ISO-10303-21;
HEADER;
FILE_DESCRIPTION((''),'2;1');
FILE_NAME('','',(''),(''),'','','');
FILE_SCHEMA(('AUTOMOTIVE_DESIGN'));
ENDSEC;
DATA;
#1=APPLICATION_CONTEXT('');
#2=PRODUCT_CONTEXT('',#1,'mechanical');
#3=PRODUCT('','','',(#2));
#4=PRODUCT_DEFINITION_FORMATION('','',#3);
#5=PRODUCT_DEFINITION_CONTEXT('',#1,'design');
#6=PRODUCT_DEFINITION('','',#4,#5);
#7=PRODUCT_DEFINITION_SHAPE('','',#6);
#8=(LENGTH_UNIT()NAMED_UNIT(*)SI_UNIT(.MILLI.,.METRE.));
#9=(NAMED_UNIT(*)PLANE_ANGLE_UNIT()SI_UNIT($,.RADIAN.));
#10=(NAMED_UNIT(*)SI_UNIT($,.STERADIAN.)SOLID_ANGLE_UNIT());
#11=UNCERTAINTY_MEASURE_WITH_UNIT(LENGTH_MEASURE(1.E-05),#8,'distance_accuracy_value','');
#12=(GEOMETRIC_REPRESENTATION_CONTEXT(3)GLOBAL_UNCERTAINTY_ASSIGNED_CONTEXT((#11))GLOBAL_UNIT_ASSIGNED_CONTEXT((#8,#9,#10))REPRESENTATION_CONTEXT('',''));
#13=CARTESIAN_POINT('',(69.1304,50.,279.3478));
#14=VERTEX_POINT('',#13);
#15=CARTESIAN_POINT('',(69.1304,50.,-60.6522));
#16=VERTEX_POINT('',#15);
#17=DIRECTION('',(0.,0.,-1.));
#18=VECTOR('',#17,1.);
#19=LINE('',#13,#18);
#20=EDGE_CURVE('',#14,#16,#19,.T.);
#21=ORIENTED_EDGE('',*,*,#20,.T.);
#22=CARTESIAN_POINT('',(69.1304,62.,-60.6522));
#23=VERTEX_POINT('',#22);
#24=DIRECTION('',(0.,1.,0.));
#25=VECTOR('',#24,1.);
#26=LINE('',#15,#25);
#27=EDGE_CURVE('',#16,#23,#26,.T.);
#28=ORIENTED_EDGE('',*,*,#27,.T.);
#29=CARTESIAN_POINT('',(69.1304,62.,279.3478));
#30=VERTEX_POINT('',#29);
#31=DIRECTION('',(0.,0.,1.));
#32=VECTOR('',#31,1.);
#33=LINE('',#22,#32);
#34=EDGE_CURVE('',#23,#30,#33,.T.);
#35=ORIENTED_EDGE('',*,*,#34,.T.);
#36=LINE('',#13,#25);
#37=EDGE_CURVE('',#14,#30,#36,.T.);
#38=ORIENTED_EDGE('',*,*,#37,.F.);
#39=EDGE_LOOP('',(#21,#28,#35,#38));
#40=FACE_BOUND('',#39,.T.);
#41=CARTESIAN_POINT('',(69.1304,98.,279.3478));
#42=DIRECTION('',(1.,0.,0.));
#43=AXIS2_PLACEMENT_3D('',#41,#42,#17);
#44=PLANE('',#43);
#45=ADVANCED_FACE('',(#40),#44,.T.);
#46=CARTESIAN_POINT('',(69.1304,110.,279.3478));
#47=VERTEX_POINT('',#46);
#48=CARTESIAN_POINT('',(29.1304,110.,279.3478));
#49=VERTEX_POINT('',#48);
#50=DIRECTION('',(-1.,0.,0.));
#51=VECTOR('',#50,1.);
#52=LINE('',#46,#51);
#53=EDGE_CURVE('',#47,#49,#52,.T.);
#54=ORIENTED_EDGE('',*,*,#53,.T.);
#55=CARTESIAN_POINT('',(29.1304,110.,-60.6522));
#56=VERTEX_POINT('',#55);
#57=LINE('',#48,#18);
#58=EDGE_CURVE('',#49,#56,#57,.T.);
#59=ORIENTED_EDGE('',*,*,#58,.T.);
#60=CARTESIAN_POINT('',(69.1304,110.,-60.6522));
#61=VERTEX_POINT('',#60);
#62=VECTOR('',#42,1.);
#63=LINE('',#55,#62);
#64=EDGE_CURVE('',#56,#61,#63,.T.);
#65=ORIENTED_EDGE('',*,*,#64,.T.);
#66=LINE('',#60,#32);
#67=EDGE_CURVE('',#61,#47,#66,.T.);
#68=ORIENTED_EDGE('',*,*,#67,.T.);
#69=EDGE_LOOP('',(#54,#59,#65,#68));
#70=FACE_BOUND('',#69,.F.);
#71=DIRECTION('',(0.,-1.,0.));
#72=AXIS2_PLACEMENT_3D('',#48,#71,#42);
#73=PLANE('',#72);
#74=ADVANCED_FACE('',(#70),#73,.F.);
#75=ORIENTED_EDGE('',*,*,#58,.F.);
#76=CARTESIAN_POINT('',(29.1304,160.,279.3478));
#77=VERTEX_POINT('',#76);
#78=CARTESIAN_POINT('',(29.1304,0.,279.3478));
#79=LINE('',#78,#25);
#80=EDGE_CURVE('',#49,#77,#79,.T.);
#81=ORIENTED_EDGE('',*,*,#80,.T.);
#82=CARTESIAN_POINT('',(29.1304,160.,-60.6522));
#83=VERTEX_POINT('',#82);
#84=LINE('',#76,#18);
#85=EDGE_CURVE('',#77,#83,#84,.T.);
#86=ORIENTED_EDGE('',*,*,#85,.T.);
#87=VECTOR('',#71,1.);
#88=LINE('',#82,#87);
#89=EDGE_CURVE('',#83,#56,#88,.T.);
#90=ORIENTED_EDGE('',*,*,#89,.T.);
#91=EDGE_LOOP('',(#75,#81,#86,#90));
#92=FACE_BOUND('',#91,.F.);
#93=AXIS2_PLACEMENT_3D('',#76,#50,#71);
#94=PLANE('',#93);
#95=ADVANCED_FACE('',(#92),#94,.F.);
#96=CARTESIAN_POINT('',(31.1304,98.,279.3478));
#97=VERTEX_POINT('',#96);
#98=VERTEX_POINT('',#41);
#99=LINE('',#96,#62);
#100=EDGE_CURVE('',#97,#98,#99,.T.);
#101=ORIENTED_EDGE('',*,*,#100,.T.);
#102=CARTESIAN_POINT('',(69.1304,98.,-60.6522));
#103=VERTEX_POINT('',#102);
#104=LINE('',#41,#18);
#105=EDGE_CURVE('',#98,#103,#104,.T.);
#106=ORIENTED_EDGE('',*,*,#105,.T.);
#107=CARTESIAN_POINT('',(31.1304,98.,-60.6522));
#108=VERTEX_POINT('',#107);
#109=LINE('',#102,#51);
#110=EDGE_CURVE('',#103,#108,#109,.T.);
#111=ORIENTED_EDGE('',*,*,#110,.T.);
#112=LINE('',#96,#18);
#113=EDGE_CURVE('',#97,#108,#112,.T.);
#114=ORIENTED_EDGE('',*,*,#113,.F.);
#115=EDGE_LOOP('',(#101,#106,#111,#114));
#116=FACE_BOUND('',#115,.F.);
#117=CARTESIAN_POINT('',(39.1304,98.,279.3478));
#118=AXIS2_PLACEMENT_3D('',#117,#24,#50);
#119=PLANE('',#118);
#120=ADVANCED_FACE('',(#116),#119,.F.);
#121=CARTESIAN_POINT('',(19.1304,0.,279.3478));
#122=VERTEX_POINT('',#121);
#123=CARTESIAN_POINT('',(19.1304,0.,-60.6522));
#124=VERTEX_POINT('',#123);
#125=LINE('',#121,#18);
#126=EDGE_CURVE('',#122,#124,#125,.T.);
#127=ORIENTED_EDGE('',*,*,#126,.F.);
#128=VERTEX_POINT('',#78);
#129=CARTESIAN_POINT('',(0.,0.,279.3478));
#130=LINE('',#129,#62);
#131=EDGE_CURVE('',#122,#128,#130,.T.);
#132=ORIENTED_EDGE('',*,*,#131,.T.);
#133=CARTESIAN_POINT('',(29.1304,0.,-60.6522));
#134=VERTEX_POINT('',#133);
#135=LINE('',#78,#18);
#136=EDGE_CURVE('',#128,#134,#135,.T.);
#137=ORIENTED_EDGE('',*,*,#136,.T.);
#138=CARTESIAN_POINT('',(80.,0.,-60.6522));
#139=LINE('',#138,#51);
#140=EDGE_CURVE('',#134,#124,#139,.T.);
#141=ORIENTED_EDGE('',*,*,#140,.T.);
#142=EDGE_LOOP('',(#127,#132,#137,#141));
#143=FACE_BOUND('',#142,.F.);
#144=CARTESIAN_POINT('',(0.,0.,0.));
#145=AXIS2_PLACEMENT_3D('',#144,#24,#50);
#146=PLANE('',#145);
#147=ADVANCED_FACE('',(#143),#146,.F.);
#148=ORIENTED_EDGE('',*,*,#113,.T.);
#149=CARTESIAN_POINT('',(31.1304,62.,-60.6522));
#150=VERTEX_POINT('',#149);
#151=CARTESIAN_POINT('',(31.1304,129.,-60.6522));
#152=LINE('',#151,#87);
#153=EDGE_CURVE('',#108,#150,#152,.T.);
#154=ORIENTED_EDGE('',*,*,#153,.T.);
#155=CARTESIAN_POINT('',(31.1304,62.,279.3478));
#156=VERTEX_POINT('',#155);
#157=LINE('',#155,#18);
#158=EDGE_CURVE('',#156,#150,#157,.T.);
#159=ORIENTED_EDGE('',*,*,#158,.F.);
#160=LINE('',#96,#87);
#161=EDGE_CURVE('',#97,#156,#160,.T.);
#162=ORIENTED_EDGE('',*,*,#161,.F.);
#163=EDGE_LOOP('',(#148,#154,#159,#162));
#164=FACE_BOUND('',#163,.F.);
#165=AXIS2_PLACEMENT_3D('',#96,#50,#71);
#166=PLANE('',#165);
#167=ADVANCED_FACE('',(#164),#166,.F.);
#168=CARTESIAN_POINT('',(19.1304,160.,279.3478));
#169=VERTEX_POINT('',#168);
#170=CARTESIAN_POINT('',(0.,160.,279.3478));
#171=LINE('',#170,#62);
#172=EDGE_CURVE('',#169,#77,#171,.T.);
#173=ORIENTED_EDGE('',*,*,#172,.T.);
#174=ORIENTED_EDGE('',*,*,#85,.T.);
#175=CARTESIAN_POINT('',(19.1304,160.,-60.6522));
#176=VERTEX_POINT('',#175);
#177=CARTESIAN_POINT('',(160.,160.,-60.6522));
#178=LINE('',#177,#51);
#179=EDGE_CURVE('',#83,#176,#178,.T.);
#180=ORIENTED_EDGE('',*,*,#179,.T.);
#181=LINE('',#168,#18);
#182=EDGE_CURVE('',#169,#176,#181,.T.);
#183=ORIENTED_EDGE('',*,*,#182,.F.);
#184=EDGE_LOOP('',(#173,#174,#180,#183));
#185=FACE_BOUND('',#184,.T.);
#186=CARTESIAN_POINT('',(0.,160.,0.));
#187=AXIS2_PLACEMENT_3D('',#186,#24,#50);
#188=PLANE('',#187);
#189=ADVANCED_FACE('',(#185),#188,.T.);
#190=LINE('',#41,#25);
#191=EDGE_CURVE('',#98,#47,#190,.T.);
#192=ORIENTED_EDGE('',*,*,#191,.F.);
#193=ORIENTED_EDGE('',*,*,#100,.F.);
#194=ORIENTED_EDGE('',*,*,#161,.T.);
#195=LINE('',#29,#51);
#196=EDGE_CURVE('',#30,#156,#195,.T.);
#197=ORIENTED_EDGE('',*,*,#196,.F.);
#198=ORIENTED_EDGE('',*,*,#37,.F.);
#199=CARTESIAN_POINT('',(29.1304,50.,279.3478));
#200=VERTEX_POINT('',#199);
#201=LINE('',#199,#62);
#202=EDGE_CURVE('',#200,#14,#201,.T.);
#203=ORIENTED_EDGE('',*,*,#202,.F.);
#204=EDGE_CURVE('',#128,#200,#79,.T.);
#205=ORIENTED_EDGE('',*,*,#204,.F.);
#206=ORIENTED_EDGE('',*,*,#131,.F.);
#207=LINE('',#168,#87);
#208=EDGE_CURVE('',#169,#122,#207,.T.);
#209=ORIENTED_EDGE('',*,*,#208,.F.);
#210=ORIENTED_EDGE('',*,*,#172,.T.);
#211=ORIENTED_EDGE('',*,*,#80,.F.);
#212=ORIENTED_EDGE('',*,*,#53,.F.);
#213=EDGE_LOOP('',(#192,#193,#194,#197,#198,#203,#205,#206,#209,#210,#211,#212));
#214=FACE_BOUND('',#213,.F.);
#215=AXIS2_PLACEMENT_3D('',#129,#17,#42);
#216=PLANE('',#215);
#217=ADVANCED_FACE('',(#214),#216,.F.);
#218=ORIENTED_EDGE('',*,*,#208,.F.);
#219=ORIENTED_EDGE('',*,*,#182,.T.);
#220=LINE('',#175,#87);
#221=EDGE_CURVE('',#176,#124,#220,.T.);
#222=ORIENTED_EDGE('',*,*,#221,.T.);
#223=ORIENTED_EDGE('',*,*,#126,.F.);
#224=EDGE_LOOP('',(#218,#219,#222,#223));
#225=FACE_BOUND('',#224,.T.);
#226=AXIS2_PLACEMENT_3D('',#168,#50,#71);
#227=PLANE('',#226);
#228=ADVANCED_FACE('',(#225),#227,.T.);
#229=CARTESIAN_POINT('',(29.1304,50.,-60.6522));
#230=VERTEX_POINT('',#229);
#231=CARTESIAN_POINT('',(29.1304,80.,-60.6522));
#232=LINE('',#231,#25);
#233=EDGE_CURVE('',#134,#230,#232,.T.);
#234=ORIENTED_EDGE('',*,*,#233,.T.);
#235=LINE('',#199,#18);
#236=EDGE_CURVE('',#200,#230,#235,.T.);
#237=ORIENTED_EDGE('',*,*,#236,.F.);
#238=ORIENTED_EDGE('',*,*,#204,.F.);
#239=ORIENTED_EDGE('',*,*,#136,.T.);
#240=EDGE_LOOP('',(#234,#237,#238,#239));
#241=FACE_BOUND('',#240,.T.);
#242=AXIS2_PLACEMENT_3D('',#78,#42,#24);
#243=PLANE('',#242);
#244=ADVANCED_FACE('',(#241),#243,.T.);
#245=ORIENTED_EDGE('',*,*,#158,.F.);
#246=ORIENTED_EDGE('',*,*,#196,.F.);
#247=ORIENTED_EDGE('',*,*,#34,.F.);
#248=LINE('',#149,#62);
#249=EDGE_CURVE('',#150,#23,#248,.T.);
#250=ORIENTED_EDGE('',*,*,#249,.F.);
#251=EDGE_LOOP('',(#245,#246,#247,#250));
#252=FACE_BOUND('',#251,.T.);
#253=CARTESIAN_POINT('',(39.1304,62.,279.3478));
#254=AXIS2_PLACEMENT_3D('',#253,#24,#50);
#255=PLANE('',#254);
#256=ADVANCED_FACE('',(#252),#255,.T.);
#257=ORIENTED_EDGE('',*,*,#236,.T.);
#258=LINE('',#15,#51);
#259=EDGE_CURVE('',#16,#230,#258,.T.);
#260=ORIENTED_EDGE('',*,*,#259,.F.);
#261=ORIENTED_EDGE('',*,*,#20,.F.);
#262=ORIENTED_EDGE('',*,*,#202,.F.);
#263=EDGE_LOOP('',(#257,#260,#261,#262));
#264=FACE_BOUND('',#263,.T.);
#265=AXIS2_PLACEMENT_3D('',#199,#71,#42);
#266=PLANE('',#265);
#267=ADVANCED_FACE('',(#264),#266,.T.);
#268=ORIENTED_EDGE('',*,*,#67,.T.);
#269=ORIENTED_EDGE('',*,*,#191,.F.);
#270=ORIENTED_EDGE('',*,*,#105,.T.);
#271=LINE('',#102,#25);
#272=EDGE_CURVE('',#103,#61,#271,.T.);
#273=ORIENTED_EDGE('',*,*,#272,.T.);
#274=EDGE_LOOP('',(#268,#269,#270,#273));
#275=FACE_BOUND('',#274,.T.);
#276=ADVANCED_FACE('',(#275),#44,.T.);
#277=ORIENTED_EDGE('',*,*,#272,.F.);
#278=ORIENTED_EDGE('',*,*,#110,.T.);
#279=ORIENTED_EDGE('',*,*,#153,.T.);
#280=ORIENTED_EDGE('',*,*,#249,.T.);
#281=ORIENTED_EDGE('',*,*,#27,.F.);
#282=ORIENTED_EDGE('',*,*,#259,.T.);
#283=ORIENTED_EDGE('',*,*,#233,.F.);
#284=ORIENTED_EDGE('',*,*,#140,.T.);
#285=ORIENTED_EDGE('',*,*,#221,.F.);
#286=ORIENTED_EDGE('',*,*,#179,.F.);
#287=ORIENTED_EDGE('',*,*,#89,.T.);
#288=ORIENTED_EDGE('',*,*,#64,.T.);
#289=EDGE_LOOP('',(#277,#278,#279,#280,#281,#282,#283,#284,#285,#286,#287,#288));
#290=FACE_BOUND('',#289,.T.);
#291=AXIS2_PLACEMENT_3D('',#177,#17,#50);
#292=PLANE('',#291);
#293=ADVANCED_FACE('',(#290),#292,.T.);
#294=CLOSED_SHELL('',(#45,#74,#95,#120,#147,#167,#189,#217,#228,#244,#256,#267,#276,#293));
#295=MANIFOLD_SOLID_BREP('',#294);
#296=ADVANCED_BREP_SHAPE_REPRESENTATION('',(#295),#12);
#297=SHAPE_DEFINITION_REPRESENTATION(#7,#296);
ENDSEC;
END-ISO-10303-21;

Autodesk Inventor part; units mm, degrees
ref_plane "YZ Plane" through (0, 0, 0) normal (1, 0, 0) x (0, 1, 0)
ref_plane "XZ Plane" through (0, 0, 0) normal (0, 1, 0) x (-1, 0, 0)
ref_plane "XY Plane" through (0, 0, 0) normal (0, 0, 1) x (1, 0, 0)
sketch "Sketch1" plane through (0, 0, 0) normal (0, 1, 0) x (-1, 0, 0)
  line L0 (0, 279.3478) -> (-39.1304, 279.3478)
  line L1 (-39.1304, 279.3478) -> (-39.1304, -195.6522)
  line L2 (-39.1304, -195.6522) -> (0, -195.6522)
  line L3 (0, -195.6522) -> (0, 279.3478)
  line L4 (-39.1304, 279.3478) -> (-29.1304, 279.3478)
  line L5 (-29.1304, 254.3478) -> (-39.1304, 254.3478)
  line L6 (-39.1304, 254.3478) -> (-39.1304, 279.3478)
  line L7 (-39.1304, -195.6522) -> (-29.1304, -195.6522)
  line L8 (-29.1304, -170.6522) -> (-39.1304, -170.6522)
  line L9 (-39.1304, -170.6522) -> (-39.1304, -195.6522)
  point P0 (0, 0)
  point P1 (-39.1304, 254.3478)
  dimension "d0" = 475
  dimension "d4" = 25
  dimension "d5" = 25
extrude "Extrusion1" add sketch "Sketch1" along normal blind 160
sketch "Sketch2" plane through (0, 0, 279.3478) normal (0, 0, 1) x (1, 0, 0)
  line L0 (0, 160) -> (39.1304, 160) projected
  line L1 (0, 160) -> (39.1304, 160)
  line L2 (39.1304, 160) -> (39.1304, 0)
  line L3 (39.1304, 0) -> (0, 0)
  line L4 (0, 0) -> (0, 160)
  line L5 (39.1304, 160) -> (29.1304, 160)
  line L6 (29.1304, 160) -> (29.1304, 110)
  line L7 (29.1304, 110) -> (39.1304, 110)
  line L8 (39.1304, 110) -> (39.1304, 160)
  line L9 (39.1304, 0) -> (29.1304, 0)
  line L10 (29.1304, 0) -> (29.1304, 50)
  line L11 (29.1304, 50) -> (39.1304, 50)
  line L12 (39.1304, 50) -> (39.1304, 0)
  circle A0 centre (39.1304, 80) radius 18
  line L13 (31.1304, 75) -> (39.1304, 75)
  line L14 (39.1304, 75) -> (39.1304, 98)
  line L15 (39.1304, 98) -> (31.1304, 98)
  line L16 (31.1304, 98) -> (31.1304, 75)
  line L17 (31.1304, 75) -> (39.1304, 75)
  line L18 (39.1304, 75) -> (39.1304, 62)
  line L19 (39.1304, 62) -> (31.1304, 62)
  line L20 (31.1304, 62) -> (31.1304, 75)
  line L21 (39.1304, 0) -> (39.1304, 160) projected
  line L22 (0, 160) -> (19.1304, 160)
  line L23 (19.1304, 160) -> (19.1304, 0)
  line L24 (19.1304, 0) -> (0, 0)
  line L25 (0, 0) -> (0, 160)
  point P0 (0, 0)
  point P1 (34.1304, 110)
  point P2 (34.1304, 160)
  point P3 (39.1304, 50)
  point P4 (39.1304, 110)
  dimension "d6" = 10
  dimension "d7" = 50
  dimension "d8" = 50
  dimension "d9" = 8
  dimension "d10" = 36
  dimension "d11" = 80
  dimension "d12" = 80
  dimension "d15" = 20
extrude "Extrusion2" cut sketch "Sketch2" against normal up to surface (475 mm away) contours L0 L23 L3 L4 | L0 L2 L7 L6 | L10 L11 L2 L3 | L2 L13 L16 A0 | A0 L16 L15 | L2 A0 L20 L13 | L19 L20 A0
sketch "Sketch3" plane through (0, 160, 0) normal (0, 1, 0) x (1, 0, 0)
  line L0 (-18, 219) -> (160, 219)
  line L1 (160, 219) -> (160, 60.6522)
  line L2 (160, 60.6522) -> (-18, 60.6522)
  line L3 (-18, 60.6522) -> (-18, 219)
  line L4 (19.1304, -279.3478) -> (29.1304, -279.3478) projected
  point P0 (0, 0)
  dimension "d16" = 340
extrude "Extrusion3" cut sketch "Sketch3" against normal blind 200
sketch "Sketch4" plane through (39.1304, 98, 279.3478) normal (1, 0, 0) x (0, 0, -1)
  line L0 (340, 0) -> (340, 12) projected
  line L1 (340, 12) -> (0, 12) projected
  line L2 (0, 0) -> (0, 12) projected
  line L3 (0, 0) -> (340, 0) projected
  line L4 (340, -48) -> (340, -36) projected
  line L5 (340, -36) -> (0, -36) projected
  line L6 (0, -48) -> (0, -36) projected
  line L7 (0, -48) -> (340, -48) projected
  point P0 (279.3478, -98)
extrude "Extrusion4" add sketch "Sketch4" along normal blind 30
properties part number "MainRails" material "Aluminum 6061"
